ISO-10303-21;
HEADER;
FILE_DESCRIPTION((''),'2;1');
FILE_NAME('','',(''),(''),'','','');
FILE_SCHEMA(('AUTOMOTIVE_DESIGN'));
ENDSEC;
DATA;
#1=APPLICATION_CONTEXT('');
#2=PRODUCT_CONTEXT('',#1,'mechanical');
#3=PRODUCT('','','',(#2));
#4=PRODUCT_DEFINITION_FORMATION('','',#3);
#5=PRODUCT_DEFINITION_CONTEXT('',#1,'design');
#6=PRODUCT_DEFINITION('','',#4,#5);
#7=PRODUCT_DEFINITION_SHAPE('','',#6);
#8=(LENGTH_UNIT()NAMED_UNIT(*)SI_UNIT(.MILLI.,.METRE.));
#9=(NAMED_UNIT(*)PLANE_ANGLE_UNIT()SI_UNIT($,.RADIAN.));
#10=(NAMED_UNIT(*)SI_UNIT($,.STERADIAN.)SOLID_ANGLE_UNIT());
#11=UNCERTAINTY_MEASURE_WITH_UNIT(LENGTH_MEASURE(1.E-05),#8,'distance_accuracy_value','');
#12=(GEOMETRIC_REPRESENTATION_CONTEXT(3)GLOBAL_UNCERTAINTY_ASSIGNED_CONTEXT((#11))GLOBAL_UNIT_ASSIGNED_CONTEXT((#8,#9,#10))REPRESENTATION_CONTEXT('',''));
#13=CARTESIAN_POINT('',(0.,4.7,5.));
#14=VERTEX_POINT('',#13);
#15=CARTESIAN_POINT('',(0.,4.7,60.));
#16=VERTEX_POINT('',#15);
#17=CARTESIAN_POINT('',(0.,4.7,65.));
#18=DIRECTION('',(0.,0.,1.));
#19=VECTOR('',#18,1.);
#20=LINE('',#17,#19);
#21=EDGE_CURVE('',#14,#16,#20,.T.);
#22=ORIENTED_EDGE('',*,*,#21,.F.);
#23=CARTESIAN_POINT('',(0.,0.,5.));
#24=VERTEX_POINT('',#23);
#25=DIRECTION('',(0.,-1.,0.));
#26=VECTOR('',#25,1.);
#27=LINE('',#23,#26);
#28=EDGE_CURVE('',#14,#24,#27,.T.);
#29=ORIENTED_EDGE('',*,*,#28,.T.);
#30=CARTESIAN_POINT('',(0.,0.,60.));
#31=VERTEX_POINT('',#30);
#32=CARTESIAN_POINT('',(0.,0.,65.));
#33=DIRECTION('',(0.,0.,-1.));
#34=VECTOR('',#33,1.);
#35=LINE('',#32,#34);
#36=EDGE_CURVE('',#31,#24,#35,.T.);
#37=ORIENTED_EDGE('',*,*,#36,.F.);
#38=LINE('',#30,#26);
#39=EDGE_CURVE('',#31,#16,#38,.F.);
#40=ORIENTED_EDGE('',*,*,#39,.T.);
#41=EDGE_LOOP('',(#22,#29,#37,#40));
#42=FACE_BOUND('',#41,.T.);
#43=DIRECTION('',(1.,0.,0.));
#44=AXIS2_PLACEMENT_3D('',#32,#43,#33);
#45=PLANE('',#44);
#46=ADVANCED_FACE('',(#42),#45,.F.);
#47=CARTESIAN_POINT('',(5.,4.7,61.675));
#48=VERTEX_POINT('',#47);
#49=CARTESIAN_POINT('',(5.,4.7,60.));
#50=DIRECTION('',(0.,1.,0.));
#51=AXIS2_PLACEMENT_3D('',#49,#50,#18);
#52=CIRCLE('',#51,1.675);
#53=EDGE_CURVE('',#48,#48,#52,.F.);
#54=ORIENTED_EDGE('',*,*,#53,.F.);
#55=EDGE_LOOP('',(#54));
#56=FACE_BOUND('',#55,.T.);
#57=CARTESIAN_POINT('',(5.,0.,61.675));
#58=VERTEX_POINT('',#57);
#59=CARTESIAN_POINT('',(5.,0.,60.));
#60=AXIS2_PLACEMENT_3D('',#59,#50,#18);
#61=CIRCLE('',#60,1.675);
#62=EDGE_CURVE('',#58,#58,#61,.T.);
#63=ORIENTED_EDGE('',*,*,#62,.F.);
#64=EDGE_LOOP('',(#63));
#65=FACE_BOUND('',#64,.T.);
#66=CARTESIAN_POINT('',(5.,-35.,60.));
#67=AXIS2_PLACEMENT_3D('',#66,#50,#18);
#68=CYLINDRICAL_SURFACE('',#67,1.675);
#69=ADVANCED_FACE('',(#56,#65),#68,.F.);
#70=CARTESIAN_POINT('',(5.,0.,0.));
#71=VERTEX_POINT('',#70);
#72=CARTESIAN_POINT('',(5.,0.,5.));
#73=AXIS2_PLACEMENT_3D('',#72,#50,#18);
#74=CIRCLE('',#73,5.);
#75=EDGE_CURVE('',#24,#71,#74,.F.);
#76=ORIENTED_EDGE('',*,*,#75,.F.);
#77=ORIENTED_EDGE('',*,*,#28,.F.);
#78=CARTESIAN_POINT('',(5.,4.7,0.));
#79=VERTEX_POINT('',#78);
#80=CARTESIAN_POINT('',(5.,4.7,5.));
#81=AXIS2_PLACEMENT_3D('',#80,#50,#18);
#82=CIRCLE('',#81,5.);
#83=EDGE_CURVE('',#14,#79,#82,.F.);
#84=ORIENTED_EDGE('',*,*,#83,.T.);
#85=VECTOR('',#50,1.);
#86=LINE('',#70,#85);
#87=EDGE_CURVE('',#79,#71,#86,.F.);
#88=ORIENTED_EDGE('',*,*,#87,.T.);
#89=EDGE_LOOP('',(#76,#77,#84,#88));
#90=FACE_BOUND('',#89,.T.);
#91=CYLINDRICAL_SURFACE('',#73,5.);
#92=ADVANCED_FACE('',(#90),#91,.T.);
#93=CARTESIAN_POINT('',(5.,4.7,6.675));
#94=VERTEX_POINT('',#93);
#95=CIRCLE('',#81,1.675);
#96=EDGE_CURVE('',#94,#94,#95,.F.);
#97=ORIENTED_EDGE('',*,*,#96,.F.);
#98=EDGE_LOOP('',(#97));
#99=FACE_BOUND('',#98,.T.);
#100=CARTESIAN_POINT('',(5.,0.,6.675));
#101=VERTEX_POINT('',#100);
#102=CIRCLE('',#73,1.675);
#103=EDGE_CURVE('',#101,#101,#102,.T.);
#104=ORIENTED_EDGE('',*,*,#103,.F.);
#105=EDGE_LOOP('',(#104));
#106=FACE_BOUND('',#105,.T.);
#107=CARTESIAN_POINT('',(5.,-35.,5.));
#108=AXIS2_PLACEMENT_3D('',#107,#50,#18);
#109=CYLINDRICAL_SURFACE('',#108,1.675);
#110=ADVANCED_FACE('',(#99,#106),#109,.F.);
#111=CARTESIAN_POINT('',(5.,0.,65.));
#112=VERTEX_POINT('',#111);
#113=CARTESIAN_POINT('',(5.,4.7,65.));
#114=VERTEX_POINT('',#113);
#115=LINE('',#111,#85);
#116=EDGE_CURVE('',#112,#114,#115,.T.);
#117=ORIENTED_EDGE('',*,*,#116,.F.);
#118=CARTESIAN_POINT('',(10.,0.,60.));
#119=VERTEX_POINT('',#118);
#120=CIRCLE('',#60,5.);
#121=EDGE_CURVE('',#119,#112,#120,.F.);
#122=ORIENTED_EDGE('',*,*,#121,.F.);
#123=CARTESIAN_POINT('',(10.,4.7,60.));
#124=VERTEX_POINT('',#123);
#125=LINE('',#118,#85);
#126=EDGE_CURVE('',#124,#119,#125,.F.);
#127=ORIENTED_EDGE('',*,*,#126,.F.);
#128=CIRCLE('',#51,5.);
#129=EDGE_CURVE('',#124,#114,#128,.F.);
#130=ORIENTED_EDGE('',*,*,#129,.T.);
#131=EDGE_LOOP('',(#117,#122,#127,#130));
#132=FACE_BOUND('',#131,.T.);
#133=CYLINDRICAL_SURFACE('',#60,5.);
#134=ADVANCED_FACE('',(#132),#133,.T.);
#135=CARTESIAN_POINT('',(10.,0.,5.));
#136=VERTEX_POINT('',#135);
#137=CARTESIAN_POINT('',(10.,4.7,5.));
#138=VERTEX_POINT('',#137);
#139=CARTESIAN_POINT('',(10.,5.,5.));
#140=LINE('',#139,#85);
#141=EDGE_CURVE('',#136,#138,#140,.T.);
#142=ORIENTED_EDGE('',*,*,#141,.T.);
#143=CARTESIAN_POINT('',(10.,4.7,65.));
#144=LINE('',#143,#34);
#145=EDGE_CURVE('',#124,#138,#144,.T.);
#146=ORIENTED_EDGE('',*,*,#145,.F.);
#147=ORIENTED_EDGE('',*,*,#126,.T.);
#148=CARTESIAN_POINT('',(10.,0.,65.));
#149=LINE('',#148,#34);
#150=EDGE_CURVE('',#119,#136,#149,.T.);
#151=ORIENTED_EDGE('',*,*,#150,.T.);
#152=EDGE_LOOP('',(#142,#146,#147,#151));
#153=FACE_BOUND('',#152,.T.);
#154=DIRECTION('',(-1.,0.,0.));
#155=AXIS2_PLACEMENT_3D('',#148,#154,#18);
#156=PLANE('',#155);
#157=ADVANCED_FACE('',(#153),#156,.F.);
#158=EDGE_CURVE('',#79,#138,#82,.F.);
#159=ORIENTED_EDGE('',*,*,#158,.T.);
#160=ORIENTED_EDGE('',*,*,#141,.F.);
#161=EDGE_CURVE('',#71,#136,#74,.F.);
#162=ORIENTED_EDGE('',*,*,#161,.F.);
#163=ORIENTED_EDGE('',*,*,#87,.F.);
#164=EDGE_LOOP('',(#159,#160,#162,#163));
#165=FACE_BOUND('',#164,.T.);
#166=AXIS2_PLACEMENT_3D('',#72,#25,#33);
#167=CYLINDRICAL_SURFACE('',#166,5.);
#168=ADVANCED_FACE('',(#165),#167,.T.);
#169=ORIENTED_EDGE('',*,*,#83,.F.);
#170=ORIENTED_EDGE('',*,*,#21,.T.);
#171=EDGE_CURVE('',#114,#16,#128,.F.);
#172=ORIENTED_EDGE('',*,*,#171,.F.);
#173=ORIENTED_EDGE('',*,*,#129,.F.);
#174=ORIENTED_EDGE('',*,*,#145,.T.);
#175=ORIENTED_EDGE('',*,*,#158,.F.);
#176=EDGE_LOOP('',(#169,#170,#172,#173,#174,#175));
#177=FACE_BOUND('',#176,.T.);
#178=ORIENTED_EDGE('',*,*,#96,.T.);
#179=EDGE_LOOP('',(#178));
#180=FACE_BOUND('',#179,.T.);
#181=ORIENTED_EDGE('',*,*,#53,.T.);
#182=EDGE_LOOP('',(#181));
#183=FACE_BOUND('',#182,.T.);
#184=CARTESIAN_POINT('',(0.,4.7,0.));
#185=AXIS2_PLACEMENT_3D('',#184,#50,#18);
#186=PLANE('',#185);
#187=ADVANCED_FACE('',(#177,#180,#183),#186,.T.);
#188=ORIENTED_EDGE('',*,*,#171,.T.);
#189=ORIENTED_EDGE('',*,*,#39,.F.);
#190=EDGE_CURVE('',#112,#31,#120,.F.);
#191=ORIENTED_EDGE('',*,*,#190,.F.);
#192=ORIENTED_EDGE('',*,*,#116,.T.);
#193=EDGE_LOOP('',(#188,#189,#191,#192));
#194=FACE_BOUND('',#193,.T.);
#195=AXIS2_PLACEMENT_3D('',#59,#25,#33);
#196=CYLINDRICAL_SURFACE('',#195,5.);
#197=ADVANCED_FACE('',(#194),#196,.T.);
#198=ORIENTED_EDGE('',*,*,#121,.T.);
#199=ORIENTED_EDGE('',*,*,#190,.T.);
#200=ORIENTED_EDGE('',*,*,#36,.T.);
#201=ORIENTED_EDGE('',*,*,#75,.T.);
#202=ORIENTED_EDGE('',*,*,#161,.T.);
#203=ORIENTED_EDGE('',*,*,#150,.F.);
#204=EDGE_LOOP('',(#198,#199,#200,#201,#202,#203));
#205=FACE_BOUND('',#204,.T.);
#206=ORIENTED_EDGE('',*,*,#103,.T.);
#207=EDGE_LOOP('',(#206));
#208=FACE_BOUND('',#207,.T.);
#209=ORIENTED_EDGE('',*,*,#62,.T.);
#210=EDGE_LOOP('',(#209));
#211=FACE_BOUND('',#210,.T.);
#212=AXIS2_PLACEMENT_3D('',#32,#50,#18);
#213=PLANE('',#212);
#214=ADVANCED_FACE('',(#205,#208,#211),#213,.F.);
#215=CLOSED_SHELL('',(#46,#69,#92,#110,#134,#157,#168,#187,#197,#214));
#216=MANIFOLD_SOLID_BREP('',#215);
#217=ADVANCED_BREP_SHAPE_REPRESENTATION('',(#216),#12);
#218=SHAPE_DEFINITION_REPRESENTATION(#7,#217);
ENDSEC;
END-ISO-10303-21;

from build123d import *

# Parameters (mm, degrees)
SKETCH_1_W          = 10
SKETCH_1_H          = 5
EXTRUDE_1_DEPTH     = 65
SKETCH_2_R          = 1.675
CUT_EXTRUDE_1_DEPTH = 40
FILLET_1_R          = 5
SKETCH_3_W          = 36.824134977
SKETCH_3_H          = 78.201072097
CUT_EXTRUDE_2_DEPTH = 0.3


with BuildPart() as part:
    # 草图1 → 凸台-拉伸1 (new body)
    with BuildSketch(Plane.XY):
        with Locations((5, 2.5)):
            Rectangle(SKETCH_1_W, SKETCH_1_H)
    extrude(amount=EXTRUDE_1_DEPTH)

    # 草图2 → 切除-拉伸1 (cut)
    with BuildSketch(Plane(origin=(0, 5, 0), x_dir=(1, 0, 0), z_dir=(0, 1, 0))):
        with Locations(Location((5, -5, 0), (0, 0, 270))):
            Circle(SKETCH_2_R)
        with Locations(Location((5, -60, 0), (0, 0, 270))):
            Circle(SKETCH_2_R)
    extrude(amount=-CUT_EXTRUDE_1_DEPTH, mode=Mode.SUBTRACT)

    # 圆角1
    fillet_1_edges = [part.edges().sort_by_distance(p)[0] for p in [
        (0, 2.5, 65),
        (10, 2.5, 65),
        (0, 2.5, 0),
        (10, 2.5, 0),
    ]]
    fillet(fillet_1_edges, radius=FILLET_1_R - 0.0001)  # a hair under: the kernel refuses the full size

    # 草图3 → 切除-拉伸2 (cut)
    with BuildSketch(Plane(origin=(0, 5, 0), x_dir=(1, 0, 0), z_dir=(0, 1, 0))):
        with Locations((11.293579433, -34.071434458)):
            Rectangle(SKETCH_3_W, SKETCH_3_H)
    extrude(amount=-CUT_EXTRUDE_2_DEPTH, mode=Mode.SUBTRACT)


solid = part.part
